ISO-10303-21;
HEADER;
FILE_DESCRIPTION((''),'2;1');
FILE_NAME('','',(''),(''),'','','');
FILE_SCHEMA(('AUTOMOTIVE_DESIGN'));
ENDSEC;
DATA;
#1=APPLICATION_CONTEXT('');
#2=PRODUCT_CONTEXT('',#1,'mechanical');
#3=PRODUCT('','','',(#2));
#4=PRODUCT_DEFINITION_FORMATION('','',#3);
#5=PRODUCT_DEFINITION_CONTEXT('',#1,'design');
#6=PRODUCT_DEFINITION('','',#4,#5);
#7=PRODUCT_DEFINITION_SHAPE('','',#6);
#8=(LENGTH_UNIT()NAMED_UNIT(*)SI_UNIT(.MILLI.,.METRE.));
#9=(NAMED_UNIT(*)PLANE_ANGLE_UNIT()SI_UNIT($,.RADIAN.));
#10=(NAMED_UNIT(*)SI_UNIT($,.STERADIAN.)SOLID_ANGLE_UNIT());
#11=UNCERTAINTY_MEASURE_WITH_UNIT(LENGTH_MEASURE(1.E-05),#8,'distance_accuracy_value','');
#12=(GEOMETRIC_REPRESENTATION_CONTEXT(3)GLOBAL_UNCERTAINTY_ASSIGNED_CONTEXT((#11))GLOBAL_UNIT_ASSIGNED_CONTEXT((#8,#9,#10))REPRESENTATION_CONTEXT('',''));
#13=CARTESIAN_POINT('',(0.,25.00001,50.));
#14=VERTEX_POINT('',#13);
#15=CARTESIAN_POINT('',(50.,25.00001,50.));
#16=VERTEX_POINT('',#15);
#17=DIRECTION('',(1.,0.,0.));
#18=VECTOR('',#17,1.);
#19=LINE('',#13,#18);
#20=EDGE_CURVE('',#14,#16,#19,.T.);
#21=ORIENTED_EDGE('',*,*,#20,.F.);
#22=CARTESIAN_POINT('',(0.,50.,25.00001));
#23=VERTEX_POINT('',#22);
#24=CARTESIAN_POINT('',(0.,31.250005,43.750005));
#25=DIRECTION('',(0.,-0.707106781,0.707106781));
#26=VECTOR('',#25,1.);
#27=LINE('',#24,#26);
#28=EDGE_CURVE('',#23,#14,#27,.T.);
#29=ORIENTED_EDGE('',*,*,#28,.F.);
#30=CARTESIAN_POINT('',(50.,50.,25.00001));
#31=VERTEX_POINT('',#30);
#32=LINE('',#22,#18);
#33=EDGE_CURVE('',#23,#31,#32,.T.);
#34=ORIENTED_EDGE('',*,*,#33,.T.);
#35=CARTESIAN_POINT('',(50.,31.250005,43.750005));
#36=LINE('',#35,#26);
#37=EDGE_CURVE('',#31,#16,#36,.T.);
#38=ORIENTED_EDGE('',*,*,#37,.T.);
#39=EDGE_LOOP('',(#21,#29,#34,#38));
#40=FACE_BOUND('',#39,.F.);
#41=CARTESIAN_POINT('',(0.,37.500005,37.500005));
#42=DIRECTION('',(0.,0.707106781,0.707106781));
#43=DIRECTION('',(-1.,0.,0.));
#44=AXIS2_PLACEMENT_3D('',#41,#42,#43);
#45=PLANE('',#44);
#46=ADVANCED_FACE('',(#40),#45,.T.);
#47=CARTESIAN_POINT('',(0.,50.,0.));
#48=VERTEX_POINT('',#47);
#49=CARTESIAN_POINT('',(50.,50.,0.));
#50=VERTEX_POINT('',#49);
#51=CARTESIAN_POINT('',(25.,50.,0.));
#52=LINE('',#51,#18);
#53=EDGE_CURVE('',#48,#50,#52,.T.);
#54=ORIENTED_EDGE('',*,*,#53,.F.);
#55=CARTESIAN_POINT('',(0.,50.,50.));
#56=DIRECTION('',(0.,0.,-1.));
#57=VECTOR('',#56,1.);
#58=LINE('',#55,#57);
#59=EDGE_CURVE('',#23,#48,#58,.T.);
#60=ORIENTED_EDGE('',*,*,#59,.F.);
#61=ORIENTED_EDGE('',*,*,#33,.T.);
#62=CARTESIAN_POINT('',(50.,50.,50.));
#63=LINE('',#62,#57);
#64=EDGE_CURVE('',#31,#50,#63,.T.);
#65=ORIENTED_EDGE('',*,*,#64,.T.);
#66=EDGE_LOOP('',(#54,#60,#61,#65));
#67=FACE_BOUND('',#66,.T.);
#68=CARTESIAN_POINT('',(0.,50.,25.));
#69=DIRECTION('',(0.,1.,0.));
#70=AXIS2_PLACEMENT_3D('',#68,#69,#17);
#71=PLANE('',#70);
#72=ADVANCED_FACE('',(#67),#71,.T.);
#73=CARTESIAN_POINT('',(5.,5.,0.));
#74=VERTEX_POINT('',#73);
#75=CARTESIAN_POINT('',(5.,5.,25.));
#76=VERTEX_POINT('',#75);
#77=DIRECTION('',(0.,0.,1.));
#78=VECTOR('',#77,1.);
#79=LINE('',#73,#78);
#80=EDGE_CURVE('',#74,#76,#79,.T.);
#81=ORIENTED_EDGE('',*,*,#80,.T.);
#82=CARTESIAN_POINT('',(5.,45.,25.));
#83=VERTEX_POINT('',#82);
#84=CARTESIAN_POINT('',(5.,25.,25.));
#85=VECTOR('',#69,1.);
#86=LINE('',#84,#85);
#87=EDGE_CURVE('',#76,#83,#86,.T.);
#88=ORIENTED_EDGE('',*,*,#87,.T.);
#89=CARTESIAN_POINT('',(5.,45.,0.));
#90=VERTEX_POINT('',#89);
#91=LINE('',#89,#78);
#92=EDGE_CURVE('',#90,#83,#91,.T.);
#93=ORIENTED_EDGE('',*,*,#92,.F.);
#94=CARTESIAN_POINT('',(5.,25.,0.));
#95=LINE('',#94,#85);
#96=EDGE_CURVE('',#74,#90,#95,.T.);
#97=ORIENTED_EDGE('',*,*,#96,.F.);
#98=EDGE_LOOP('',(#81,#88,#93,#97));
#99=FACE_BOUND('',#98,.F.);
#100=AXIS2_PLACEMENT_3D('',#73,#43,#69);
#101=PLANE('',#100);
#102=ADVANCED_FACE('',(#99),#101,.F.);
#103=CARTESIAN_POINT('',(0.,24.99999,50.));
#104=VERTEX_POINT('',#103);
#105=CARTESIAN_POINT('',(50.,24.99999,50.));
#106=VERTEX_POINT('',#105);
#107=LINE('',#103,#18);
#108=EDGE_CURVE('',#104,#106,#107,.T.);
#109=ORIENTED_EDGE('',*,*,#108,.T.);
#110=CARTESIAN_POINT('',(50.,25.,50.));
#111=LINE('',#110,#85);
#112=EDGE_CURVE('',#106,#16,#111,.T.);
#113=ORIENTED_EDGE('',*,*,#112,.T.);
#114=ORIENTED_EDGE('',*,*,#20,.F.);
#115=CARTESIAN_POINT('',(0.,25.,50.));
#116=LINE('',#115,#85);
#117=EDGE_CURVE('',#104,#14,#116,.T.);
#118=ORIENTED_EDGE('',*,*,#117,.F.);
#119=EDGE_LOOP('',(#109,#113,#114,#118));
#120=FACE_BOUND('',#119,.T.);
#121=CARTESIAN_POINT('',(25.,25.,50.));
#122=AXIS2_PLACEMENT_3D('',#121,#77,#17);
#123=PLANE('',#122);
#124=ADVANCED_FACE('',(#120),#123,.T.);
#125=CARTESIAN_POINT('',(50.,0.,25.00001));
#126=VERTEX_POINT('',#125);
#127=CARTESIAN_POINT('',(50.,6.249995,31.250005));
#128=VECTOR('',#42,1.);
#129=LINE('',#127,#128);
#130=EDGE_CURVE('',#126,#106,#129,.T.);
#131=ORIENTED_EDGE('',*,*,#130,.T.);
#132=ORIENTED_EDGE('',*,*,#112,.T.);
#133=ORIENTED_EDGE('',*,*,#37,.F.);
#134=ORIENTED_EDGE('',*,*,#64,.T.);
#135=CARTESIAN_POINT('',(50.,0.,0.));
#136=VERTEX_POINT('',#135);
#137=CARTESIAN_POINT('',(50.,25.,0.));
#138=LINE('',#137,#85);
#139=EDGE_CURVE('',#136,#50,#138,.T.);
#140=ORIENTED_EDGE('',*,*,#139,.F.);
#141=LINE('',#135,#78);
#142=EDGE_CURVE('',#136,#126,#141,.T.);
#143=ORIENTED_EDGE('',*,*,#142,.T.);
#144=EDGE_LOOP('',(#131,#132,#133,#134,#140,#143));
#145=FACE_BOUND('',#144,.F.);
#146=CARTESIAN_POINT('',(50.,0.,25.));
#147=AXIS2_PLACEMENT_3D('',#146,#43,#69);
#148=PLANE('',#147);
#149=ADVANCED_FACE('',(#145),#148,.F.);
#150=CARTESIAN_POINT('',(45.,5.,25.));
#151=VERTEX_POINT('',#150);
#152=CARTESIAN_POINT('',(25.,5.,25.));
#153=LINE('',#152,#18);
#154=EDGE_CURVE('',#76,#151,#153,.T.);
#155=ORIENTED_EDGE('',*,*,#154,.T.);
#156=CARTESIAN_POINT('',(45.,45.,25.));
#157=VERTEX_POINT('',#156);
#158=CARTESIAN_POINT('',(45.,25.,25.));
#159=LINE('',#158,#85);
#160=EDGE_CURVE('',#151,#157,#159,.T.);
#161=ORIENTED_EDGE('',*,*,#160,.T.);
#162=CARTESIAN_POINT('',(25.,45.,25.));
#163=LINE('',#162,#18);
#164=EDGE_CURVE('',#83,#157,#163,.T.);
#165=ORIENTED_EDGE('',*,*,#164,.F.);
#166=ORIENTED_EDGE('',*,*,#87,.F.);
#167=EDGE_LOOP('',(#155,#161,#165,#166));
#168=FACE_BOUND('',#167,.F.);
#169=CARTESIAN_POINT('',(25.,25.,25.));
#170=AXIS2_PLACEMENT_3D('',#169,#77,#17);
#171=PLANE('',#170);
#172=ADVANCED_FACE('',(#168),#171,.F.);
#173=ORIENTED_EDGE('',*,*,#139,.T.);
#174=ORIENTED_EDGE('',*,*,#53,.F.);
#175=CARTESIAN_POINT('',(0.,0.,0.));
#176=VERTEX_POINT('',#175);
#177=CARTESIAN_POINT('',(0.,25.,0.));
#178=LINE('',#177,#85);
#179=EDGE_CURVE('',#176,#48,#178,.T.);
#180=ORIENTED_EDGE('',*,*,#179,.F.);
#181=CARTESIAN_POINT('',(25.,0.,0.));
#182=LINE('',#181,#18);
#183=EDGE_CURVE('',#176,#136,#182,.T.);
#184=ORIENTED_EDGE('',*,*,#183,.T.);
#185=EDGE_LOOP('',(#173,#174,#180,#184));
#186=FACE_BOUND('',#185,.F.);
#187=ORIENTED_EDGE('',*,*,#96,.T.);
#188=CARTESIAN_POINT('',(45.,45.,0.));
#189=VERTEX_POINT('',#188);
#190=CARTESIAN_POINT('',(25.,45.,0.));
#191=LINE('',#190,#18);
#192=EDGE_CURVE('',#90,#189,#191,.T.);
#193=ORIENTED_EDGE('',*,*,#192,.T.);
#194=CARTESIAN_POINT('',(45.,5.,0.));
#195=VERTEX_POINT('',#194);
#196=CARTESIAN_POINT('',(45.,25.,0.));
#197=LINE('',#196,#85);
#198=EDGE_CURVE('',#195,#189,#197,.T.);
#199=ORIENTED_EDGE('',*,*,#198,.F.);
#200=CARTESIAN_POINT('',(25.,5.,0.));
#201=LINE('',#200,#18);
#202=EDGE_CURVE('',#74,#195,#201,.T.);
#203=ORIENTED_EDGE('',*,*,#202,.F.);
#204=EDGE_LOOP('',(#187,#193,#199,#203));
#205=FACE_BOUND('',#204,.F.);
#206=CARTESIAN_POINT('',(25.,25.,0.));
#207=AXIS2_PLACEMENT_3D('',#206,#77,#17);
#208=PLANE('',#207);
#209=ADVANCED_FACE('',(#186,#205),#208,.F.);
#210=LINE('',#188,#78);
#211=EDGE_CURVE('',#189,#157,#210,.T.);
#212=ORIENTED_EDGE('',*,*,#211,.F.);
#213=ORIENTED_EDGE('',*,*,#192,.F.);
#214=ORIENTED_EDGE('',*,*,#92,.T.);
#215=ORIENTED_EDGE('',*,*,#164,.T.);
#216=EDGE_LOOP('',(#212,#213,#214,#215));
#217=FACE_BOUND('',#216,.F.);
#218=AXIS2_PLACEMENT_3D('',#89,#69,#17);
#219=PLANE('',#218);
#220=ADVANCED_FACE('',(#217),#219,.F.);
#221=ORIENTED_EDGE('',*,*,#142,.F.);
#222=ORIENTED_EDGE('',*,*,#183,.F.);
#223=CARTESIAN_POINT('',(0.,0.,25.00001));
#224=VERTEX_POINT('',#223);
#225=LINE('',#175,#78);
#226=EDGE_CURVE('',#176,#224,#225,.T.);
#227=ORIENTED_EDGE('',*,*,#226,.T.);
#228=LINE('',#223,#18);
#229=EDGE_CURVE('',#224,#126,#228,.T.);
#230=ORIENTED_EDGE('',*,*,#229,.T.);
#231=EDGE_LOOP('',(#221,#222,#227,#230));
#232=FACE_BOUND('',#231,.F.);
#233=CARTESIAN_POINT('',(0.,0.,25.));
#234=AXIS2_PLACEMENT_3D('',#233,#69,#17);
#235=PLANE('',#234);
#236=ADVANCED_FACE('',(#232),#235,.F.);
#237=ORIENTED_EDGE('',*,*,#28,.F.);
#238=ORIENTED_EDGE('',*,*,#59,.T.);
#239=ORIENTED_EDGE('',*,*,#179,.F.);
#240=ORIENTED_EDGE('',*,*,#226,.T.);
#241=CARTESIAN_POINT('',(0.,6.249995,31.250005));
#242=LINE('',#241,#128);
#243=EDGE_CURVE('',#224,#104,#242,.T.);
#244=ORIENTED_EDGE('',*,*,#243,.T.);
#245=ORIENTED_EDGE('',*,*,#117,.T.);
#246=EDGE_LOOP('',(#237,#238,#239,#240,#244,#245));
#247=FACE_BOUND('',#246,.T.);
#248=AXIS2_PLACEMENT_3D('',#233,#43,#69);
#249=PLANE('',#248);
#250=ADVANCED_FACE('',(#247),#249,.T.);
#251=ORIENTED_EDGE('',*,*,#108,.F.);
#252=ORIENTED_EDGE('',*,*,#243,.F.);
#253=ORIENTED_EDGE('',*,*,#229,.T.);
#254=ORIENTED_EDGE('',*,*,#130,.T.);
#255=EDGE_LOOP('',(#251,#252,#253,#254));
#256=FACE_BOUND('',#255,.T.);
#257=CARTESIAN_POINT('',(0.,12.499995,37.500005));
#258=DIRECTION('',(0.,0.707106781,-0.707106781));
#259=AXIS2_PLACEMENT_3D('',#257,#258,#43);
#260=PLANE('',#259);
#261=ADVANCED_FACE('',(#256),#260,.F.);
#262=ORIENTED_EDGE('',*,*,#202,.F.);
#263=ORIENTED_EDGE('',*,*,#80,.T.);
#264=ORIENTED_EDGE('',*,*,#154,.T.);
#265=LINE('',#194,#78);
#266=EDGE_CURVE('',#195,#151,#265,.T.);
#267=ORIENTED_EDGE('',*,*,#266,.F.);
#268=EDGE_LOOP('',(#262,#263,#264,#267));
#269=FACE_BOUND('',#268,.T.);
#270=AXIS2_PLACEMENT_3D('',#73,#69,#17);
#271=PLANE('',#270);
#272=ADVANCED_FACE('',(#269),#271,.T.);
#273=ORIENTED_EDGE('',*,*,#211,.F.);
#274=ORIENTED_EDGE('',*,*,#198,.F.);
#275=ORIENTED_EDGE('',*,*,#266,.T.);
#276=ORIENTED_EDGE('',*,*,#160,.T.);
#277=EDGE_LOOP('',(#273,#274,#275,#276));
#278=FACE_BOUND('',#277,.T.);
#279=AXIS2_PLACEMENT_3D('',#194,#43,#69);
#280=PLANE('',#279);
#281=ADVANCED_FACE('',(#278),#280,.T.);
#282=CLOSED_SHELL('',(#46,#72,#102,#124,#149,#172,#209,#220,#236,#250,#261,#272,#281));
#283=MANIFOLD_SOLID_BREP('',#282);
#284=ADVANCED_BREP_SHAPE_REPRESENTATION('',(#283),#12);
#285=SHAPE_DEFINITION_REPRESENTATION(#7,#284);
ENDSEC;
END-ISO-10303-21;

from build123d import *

# Parameters (mm, degrees)
F0_W     = 50
F0_H     = 50
F0_W_2   = 40
F0_H_2   = 40
F1_DEPTH = 25
F2_W     = 50
F2_H     = 50
F2_W_2   = 40
F2_H_2   = 40
F3_DEPTH = 25
F4_SIZE  = 24.99999


# Not quite as in the source:
# - a fillet or chamfer is up to 0.001 mm smaller than in the source, because OpenCascade refuses the exact size


with BuildPart() as f1:
    # F0 (on Top) → F1 (new body)
    with BuildSketch(Plane.XY):
        with Locations((25, 25)):
            Rectangle(F0_W, F0_H)
        with Locations((25, 25)):
            Rectangle(F0_W_2, F0_H_2, mode=Mode.SUBTRACT)
    extrude(amount=F1_DEPTH)

    # F2 (on face) → F3 (join)
    with BuildSketch(Plane.XY.offset(25)):
        with Locations((25, 25)):
            Rectangle(F2_W, F2_H)
        with Locations((25, 25)):
            Rectangle(F2_W_2, F2_H_2, mode=Mode.SUBTRACT)
        with Locations((25, 25)):
            Rectangle(F2_W_2, F2_H_2)
    extrude(amount=F3_DEPTH)

    # F4 (size 25 in the source; OpenCascade refuses exactly that, so slightly less here)
    f4_edges = [f1.edges().sort_by_distance(p)[0] for p in [
        (25, 0, 50),
        (25, 50, 50),
    ]]
    chamfer(f4_edges, length=F4_SIZE)


solid = f1.part
